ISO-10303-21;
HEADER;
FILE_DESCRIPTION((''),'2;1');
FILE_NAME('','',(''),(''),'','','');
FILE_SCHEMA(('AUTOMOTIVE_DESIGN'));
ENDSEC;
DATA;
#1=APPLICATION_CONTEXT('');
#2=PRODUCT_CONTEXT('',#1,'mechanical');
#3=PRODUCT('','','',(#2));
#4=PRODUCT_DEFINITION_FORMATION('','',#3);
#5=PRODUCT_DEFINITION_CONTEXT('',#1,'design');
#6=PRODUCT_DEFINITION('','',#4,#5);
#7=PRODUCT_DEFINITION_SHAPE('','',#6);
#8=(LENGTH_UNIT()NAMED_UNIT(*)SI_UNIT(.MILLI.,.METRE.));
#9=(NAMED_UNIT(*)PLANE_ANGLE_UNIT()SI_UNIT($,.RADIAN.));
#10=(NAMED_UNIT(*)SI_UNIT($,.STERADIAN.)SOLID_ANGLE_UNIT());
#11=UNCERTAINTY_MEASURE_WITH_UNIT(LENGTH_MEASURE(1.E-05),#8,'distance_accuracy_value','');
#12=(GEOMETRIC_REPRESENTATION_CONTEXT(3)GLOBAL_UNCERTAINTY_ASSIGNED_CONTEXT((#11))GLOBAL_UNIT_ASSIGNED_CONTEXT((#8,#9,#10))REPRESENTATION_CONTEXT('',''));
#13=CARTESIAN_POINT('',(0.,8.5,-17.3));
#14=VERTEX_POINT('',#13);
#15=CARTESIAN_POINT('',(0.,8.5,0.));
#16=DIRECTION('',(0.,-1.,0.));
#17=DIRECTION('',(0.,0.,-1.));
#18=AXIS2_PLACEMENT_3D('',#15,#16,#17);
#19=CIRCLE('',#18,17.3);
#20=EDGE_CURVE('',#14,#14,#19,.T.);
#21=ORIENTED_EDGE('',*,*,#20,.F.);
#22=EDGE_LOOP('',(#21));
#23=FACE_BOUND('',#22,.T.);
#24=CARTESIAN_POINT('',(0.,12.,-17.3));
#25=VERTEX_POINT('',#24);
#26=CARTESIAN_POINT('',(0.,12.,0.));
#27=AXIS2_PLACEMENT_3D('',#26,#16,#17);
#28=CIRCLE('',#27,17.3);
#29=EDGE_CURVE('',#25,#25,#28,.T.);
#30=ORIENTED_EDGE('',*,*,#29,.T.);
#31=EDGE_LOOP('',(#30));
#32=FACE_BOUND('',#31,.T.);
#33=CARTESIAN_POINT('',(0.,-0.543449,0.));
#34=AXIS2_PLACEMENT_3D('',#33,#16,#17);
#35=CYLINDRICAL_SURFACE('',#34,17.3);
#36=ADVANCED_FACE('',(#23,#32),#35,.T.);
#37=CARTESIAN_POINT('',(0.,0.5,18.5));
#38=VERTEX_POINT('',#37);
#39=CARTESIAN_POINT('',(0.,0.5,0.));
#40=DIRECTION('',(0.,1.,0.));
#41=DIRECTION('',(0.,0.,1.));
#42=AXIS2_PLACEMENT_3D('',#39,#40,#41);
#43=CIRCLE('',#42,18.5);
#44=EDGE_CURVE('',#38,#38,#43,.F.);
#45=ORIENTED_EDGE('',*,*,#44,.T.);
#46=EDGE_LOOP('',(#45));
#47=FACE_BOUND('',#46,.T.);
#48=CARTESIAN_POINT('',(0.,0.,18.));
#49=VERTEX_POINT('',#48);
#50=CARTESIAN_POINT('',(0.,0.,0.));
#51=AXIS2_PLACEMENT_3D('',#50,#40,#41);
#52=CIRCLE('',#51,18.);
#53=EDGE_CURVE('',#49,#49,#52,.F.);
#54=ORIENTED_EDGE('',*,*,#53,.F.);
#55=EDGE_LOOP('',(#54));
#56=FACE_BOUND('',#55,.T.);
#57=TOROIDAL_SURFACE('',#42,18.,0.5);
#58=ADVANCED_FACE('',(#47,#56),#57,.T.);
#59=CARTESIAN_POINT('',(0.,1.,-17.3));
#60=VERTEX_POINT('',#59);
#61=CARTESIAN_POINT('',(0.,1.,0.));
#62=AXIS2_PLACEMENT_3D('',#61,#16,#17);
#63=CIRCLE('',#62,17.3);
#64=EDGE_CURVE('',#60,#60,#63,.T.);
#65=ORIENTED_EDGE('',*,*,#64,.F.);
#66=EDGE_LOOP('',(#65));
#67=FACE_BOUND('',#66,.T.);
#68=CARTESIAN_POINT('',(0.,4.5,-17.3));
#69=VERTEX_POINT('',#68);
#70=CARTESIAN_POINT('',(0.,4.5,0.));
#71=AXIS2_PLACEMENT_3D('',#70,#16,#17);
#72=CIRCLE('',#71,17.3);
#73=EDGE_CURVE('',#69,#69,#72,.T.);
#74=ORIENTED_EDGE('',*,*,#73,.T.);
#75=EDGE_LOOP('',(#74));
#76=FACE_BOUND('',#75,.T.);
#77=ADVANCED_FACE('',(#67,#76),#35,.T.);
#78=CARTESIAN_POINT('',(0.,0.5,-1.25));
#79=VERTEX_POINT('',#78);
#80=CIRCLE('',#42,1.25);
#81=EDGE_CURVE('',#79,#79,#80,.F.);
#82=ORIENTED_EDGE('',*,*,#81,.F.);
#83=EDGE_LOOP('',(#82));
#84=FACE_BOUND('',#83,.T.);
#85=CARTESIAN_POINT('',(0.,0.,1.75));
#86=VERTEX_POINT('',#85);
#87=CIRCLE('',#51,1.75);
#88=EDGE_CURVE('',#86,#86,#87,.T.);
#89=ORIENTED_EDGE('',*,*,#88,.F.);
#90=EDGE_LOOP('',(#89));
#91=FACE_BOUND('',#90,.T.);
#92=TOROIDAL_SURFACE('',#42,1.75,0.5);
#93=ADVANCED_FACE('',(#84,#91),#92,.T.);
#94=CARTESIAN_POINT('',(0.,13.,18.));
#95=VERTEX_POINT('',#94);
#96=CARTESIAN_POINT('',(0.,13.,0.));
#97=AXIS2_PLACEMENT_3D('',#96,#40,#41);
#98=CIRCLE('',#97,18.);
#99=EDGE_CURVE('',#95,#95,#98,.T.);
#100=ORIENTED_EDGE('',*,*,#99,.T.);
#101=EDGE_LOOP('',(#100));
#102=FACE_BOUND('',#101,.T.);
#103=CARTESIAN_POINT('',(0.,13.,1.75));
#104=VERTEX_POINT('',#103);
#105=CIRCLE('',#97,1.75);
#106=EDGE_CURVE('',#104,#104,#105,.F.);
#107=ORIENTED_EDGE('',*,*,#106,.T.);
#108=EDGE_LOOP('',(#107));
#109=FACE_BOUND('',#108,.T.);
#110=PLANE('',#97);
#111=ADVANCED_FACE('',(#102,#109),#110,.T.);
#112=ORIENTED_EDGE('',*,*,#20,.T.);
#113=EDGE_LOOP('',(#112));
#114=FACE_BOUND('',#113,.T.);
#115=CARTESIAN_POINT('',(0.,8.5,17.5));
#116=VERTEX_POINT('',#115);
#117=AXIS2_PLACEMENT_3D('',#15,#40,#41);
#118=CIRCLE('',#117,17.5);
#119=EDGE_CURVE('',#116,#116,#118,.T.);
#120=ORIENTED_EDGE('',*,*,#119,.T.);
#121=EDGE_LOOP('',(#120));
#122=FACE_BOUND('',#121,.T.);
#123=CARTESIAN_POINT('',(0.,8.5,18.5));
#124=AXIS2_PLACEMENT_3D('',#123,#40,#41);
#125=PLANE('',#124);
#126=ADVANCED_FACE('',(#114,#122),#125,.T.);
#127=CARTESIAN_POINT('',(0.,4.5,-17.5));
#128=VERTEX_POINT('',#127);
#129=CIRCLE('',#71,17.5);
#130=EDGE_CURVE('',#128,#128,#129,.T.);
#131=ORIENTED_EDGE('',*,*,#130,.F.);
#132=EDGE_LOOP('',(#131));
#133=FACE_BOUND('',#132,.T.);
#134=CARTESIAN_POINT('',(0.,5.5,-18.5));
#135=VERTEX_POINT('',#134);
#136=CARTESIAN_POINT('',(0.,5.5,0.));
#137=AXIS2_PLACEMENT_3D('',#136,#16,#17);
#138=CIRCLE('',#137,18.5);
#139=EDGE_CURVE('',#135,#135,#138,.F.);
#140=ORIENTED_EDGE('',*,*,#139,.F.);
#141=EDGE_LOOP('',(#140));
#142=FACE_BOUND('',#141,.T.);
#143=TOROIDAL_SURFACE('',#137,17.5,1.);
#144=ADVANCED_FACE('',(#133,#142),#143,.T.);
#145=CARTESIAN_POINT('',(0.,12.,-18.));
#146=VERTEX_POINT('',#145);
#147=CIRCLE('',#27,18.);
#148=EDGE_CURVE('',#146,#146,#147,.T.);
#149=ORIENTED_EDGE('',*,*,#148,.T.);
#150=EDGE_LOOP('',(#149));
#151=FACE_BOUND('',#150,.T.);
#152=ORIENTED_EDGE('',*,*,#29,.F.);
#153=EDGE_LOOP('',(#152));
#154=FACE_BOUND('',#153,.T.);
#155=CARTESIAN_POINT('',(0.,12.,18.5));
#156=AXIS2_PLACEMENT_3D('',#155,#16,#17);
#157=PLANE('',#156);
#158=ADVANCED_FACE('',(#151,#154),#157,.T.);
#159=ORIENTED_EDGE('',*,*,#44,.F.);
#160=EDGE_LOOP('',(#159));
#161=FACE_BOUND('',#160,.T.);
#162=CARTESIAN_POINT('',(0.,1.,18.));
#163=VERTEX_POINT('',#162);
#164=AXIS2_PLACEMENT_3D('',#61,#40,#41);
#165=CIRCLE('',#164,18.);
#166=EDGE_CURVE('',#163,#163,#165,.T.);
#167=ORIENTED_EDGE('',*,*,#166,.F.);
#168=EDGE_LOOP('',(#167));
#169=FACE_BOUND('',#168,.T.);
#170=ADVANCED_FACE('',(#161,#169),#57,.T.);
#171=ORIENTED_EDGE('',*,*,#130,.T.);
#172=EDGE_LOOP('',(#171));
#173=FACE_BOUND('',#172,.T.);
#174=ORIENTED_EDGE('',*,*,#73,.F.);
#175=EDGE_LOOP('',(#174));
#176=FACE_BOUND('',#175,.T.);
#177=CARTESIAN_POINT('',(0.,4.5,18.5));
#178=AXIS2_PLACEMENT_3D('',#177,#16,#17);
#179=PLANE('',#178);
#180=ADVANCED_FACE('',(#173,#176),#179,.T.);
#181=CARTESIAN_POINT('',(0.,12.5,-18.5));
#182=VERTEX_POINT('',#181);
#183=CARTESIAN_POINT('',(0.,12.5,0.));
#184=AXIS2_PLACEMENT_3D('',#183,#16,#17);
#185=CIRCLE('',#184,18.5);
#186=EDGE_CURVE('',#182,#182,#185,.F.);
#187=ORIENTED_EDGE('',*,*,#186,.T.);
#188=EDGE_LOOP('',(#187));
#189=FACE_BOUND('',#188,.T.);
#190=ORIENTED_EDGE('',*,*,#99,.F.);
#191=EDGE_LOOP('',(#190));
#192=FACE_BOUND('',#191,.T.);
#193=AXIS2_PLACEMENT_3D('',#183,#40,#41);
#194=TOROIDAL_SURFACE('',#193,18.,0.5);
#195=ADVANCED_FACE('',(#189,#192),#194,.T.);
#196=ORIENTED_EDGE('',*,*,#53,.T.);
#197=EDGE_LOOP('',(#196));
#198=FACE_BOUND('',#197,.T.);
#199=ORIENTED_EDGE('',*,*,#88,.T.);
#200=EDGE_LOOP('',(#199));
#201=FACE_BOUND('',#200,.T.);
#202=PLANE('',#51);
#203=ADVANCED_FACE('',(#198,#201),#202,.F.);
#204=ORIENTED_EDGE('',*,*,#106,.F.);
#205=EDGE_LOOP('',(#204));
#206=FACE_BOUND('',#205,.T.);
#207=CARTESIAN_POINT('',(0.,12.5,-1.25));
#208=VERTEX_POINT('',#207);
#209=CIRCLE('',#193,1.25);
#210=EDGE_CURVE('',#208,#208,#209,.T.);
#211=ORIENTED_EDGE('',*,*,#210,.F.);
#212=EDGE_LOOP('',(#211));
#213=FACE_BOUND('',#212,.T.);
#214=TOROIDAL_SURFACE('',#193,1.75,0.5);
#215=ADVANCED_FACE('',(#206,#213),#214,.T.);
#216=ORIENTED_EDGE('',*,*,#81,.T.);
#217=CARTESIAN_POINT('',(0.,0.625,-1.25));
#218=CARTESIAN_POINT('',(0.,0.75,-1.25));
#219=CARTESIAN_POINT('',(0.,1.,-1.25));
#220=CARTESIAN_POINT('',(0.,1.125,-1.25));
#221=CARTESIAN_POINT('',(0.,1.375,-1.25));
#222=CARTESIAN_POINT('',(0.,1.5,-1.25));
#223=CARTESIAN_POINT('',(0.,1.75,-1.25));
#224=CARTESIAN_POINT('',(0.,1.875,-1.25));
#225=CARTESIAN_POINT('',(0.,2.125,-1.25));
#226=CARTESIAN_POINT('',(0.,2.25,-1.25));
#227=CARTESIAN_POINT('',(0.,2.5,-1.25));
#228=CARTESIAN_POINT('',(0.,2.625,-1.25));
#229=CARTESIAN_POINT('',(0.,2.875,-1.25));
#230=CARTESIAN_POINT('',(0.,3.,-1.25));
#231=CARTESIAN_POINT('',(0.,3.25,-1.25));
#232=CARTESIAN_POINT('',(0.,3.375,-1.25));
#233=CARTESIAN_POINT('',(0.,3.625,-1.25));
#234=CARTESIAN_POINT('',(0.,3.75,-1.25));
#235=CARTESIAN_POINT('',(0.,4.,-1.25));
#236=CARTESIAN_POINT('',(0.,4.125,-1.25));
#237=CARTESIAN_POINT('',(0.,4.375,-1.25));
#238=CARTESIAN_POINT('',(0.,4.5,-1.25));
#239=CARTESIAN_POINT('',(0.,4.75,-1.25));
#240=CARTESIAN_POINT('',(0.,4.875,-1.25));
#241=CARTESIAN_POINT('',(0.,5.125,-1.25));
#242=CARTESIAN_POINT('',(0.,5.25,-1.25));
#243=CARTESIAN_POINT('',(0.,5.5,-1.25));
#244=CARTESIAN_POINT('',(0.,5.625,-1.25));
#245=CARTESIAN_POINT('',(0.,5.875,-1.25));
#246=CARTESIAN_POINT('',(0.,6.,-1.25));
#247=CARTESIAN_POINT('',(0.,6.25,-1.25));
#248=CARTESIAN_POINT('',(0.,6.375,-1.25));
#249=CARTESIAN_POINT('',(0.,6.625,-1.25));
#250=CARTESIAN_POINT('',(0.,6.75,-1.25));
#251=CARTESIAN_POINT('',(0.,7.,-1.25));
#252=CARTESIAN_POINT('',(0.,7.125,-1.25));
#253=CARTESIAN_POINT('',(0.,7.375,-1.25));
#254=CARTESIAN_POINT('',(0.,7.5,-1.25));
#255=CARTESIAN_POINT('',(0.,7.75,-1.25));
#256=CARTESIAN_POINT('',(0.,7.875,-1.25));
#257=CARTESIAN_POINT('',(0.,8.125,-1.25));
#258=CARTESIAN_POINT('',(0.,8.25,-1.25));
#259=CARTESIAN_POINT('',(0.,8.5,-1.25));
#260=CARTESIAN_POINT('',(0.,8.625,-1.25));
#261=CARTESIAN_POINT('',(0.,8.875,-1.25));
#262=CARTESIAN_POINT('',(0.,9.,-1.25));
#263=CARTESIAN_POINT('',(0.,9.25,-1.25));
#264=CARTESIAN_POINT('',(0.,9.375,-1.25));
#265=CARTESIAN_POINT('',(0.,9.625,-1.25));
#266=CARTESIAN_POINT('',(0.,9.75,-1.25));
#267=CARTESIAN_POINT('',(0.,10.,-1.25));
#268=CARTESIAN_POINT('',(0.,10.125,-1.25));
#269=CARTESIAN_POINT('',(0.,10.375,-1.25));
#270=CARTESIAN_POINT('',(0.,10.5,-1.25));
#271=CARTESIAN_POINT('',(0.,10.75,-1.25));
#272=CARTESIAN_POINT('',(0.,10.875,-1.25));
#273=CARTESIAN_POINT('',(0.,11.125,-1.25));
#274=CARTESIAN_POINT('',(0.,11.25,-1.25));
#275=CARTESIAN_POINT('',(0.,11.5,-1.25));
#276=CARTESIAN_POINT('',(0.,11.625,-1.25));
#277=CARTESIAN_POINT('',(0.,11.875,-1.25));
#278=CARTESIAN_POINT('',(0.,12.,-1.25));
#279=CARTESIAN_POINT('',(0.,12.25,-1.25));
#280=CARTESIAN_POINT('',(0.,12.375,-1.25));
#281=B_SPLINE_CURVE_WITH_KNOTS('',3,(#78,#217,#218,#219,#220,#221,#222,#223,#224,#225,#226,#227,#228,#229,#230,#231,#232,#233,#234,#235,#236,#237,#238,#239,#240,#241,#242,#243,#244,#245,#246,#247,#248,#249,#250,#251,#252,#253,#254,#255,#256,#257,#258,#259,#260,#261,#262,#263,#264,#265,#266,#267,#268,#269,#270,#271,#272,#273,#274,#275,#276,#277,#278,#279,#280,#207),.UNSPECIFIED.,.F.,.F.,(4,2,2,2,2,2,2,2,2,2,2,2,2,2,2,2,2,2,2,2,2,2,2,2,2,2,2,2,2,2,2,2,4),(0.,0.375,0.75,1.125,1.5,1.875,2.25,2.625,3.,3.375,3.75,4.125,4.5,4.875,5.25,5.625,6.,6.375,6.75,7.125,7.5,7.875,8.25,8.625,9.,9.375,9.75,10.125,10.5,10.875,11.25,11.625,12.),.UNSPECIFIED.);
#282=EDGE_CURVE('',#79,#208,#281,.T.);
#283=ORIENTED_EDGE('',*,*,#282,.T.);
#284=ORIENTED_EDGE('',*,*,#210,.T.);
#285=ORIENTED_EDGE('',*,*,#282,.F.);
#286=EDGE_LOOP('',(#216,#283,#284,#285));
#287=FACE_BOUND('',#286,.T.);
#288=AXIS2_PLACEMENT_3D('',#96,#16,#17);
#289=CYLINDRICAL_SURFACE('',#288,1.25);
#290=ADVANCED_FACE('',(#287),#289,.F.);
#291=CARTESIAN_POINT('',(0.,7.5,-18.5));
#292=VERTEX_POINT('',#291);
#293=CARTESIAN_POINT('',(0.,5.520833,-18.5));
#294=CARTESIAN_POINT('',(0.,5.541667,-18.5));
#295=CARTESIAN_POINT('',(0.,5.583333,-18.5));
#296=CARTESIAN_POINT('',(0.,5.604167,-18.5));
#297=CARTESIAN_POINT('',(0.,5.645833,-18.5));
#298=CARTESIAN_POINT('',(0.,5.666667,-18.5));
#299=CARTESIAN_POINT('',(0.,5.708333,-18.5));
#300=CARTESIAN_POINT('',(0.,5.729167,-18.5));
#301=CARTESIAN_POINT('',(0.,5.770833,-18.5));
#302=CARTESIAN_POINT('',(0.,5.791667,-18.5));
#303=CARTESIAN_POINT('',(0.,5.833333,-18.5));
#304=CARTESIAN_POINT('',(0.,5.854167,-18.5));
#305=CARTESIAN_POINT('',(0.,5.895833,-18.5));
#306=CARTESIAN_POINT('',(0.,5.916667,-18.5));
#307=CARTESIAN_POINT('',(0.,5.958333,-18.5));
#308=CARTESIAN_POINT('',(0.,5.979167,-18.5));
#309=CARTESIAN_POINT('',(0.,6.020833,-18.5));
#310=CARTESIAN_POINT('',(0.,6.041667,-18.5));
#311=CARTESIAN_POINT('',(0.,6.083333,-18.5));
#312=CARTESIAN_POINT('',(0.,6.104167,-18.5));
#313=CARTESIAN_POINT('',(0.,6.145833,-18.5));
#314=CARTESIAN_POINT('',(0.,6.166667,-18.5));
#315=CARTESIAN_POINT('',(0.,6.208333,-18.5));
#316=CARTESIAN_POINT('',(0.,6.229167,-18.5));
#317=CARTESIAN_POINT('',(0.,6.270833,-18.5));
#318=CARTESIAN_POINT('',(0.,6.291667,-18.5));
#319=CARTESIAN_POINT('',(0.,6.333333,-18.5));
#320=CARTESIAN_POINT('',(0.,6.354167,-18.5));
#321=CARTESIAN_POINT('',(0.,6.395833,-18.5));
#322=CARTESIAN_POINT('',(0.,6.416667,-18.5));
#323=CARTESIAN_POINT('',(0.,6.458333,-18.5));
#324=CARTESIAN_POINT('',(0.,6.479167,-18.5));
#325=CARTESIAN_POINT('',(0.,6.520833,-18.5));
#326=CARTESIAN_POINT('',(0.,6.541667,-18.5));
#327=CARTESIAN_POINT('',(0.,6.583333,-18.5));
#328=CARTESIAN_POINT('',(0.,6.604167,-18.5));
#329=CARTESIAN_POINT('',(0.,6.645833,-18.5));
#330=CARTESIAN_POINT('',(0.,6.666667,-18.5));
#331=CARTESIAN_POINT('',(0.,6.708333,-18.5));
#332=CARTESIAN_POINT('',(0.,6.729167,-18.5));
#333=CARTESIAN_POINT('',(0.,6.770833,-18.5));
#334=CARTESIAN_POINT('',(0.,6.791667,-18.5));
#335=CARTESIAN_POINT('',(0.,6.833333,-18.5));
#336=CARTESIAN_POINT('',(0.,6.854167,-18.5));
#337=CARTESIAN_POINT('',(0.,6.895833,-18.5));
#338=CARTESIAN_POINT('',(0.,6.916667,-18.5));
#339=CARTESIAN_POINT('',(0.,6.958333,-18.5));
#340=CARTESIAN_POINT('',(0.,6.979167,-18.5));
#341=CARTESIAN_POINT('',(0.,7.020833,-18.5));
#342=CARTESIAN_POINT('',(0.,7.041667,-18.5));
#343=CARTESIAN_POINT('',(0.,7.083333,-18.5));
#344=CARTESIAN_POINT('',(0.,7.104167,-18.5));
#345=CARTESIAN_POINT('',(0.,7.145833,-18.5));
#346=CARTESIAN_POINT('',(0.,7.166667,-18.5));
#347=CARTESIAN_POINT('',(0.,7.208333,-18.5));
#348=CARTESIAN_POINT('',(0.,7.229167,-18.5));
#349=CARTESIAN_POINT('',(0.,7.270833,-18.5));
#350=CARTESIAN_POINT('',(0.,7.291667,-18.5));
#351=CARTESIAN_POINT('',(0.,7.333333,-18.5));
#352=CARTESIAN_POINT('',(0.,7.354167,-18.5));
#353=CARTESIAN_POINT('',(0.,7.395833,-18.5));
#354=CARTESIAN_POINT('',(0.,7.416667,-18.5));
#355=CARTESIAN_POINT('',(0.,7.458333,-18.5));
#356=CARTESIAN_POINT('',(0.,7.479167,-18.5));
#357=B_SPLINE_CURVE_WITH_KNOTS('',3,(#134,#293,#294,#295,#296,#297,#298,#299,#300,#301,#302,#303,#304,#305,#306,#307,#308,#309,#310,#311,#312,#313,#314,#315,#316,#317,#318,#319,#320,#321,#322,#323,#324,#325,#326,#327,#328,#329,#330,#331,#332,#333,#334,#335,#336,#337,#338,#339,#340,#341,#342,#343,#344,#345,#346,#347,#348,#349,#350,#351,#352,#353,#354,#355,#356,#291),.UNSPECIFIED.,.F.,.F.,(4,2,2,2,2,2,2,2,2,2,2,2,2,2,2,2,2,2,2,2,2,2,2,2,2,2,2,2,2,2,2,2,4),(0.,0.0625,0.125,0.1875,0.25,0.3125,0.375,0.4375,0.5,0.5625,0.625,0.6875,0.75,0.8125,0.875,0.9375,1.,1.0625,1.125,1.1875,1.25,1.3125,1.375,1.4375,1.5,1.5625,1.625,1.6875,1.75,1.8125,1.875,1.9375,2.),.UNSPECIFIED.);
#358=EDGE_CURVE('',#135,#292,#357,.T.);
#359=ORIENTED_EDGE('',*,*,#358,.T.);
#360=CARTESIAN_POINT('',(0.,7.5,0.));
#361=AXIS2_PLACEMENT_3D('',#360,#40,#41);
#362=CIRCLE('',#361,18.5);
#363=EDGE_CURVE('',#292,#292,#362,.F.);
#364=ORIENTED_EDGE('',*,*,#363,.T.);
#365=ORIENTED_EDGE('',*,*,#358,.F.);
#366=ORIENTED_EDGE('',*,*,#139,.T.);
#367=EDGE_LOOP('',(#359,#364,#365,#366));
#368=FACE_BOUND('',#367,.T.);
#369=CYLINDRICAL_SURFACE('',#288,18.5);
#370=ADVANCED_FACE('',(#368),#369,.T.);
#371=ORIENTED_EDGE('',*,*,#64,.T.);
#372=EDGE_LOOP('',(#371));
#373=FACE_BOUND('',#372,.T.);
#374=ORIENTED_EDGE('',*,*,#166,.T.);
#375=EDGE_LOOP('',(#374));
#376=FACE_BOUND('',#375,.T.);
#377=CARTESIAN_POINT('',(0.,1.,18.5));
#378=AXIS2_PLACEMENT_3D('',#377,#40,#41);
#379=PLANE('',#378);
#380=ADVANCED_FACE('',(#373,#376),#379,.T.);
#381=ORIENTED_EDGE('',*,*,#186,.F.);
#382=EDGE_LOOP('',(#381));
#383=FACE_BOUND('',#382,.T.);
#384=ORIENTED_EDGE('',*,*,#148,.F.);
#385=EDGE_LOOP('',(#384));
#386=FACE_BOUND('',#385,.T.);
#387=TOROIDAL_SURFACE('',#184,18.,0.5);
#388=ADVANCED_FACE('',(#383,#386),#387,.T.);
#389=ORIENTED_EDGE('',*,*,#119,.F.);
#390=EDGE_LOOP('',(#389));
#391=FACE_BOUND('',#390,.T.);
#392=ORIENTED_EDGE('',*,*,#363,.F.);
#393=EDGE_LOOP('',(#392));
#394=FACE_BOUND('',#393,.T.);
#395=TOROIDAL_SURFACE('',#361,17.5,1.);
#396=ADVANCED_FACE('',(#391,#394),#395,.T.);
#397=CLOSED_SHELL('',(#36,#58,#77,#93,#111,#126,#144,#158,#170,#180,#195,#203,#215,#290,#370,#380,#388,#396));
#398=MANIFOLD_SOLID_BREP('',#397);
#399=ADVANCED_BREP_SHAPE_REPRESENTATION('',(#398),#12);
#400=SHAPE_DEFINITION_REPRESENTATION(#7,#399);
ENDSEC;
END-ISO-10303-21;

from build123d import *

# Parameters (mm, degrees)
SKETCH1_R           = 18.5
SKETCH1_R_2         = 1.25
BOSS_EXTRUDE1_DEPTH = 13
SKETCH3_W           = 1.2
SKETCH3_H           = 3.5
FILLET1_R           = 1
FILLET2_R           = 0.5
FILLET3_R           = 0.5
FILLET4_R           = 0.5


with BuildPart() as part:
    # Sketch1 → Boss-Extrude1 (new body)
    with BuildSketch(Plane(origin=(0, 0, 0), x_dir=(1, 0, 0), z_dir=(0, 1, 0))):
        with Locations(Location((0, 0, 0), (0, 0, 90))):
            Circle(SKETCH1_R)
        with Locations(Location((0, 0, 0), (0, 0, 90))):
            Circle(SKETCH1_R_2, mode=Mode.SUBTRACT)
    extrude(amount=BOSS_EXTRUDE1_DEPTH)

    # Sketch3 → Cut-Revolve1 (revolve, cut)
    with BuildSketch(Plane(origin=(0, 0, 0), x_dir=(0, 0, -1), z_dir=(1, 0, 0)), mode=Mode.PRIVATE) as cut_revolve1_sk:
        with Locations((-17.9, 10.25)):
            Rectangle(SKETCH3_W, SKETCH3_H)
        with Locations((-17.9, 2.75)):
            Rectangle(SKETCH3_W, SKETCH3_H)
    revolve(cut_revolve1_sk.sketch.rotate(Axis((0, -0.54344918, 0), (0, 1, 0)), 180), axis=Axis((0, -0.54344918, 0), (0, 1, 0)), mode=Mode.SUBTRACT)

    # Fillet1
    fillet1_edges = [part.edges().sort_by_distance(p)[0] for p in [
        (0, 8.5, 18.5),
        (0, 4.5, 18.5),
    ]]
    fillet(fillet1_edges, radius=FILLET1_R)

    # Fillet2
    fillet2_edges = [part.edges().sort_by_distance(p)[0] for p in [
        (0, 12, 18.5),
        (0, 1, 18.5),
    ]]
    fillet(fillet2_edges, radius=FILLET2_R)

    # Fillet3
    fillet3_edges = [part.edges().sort_by_distance(p)[0] for p in [
        (0, 0, 18.5),
        (0, 13, 18.5),
    ]]
    fillet(fillet3_edges, radius=FILLET3_R - 0.0001)  # a hair under: the kernel refuses the full size

    # Fillet4
    fillet4_edges = [part.edges().sort_by_distance(p)[0] for p in [
        (0, 0, 1.25),
        (0, 13, 1.25),
    ]]
    fillet(fillet4_edges, radius=FILLET4_R)


solid = part.part
